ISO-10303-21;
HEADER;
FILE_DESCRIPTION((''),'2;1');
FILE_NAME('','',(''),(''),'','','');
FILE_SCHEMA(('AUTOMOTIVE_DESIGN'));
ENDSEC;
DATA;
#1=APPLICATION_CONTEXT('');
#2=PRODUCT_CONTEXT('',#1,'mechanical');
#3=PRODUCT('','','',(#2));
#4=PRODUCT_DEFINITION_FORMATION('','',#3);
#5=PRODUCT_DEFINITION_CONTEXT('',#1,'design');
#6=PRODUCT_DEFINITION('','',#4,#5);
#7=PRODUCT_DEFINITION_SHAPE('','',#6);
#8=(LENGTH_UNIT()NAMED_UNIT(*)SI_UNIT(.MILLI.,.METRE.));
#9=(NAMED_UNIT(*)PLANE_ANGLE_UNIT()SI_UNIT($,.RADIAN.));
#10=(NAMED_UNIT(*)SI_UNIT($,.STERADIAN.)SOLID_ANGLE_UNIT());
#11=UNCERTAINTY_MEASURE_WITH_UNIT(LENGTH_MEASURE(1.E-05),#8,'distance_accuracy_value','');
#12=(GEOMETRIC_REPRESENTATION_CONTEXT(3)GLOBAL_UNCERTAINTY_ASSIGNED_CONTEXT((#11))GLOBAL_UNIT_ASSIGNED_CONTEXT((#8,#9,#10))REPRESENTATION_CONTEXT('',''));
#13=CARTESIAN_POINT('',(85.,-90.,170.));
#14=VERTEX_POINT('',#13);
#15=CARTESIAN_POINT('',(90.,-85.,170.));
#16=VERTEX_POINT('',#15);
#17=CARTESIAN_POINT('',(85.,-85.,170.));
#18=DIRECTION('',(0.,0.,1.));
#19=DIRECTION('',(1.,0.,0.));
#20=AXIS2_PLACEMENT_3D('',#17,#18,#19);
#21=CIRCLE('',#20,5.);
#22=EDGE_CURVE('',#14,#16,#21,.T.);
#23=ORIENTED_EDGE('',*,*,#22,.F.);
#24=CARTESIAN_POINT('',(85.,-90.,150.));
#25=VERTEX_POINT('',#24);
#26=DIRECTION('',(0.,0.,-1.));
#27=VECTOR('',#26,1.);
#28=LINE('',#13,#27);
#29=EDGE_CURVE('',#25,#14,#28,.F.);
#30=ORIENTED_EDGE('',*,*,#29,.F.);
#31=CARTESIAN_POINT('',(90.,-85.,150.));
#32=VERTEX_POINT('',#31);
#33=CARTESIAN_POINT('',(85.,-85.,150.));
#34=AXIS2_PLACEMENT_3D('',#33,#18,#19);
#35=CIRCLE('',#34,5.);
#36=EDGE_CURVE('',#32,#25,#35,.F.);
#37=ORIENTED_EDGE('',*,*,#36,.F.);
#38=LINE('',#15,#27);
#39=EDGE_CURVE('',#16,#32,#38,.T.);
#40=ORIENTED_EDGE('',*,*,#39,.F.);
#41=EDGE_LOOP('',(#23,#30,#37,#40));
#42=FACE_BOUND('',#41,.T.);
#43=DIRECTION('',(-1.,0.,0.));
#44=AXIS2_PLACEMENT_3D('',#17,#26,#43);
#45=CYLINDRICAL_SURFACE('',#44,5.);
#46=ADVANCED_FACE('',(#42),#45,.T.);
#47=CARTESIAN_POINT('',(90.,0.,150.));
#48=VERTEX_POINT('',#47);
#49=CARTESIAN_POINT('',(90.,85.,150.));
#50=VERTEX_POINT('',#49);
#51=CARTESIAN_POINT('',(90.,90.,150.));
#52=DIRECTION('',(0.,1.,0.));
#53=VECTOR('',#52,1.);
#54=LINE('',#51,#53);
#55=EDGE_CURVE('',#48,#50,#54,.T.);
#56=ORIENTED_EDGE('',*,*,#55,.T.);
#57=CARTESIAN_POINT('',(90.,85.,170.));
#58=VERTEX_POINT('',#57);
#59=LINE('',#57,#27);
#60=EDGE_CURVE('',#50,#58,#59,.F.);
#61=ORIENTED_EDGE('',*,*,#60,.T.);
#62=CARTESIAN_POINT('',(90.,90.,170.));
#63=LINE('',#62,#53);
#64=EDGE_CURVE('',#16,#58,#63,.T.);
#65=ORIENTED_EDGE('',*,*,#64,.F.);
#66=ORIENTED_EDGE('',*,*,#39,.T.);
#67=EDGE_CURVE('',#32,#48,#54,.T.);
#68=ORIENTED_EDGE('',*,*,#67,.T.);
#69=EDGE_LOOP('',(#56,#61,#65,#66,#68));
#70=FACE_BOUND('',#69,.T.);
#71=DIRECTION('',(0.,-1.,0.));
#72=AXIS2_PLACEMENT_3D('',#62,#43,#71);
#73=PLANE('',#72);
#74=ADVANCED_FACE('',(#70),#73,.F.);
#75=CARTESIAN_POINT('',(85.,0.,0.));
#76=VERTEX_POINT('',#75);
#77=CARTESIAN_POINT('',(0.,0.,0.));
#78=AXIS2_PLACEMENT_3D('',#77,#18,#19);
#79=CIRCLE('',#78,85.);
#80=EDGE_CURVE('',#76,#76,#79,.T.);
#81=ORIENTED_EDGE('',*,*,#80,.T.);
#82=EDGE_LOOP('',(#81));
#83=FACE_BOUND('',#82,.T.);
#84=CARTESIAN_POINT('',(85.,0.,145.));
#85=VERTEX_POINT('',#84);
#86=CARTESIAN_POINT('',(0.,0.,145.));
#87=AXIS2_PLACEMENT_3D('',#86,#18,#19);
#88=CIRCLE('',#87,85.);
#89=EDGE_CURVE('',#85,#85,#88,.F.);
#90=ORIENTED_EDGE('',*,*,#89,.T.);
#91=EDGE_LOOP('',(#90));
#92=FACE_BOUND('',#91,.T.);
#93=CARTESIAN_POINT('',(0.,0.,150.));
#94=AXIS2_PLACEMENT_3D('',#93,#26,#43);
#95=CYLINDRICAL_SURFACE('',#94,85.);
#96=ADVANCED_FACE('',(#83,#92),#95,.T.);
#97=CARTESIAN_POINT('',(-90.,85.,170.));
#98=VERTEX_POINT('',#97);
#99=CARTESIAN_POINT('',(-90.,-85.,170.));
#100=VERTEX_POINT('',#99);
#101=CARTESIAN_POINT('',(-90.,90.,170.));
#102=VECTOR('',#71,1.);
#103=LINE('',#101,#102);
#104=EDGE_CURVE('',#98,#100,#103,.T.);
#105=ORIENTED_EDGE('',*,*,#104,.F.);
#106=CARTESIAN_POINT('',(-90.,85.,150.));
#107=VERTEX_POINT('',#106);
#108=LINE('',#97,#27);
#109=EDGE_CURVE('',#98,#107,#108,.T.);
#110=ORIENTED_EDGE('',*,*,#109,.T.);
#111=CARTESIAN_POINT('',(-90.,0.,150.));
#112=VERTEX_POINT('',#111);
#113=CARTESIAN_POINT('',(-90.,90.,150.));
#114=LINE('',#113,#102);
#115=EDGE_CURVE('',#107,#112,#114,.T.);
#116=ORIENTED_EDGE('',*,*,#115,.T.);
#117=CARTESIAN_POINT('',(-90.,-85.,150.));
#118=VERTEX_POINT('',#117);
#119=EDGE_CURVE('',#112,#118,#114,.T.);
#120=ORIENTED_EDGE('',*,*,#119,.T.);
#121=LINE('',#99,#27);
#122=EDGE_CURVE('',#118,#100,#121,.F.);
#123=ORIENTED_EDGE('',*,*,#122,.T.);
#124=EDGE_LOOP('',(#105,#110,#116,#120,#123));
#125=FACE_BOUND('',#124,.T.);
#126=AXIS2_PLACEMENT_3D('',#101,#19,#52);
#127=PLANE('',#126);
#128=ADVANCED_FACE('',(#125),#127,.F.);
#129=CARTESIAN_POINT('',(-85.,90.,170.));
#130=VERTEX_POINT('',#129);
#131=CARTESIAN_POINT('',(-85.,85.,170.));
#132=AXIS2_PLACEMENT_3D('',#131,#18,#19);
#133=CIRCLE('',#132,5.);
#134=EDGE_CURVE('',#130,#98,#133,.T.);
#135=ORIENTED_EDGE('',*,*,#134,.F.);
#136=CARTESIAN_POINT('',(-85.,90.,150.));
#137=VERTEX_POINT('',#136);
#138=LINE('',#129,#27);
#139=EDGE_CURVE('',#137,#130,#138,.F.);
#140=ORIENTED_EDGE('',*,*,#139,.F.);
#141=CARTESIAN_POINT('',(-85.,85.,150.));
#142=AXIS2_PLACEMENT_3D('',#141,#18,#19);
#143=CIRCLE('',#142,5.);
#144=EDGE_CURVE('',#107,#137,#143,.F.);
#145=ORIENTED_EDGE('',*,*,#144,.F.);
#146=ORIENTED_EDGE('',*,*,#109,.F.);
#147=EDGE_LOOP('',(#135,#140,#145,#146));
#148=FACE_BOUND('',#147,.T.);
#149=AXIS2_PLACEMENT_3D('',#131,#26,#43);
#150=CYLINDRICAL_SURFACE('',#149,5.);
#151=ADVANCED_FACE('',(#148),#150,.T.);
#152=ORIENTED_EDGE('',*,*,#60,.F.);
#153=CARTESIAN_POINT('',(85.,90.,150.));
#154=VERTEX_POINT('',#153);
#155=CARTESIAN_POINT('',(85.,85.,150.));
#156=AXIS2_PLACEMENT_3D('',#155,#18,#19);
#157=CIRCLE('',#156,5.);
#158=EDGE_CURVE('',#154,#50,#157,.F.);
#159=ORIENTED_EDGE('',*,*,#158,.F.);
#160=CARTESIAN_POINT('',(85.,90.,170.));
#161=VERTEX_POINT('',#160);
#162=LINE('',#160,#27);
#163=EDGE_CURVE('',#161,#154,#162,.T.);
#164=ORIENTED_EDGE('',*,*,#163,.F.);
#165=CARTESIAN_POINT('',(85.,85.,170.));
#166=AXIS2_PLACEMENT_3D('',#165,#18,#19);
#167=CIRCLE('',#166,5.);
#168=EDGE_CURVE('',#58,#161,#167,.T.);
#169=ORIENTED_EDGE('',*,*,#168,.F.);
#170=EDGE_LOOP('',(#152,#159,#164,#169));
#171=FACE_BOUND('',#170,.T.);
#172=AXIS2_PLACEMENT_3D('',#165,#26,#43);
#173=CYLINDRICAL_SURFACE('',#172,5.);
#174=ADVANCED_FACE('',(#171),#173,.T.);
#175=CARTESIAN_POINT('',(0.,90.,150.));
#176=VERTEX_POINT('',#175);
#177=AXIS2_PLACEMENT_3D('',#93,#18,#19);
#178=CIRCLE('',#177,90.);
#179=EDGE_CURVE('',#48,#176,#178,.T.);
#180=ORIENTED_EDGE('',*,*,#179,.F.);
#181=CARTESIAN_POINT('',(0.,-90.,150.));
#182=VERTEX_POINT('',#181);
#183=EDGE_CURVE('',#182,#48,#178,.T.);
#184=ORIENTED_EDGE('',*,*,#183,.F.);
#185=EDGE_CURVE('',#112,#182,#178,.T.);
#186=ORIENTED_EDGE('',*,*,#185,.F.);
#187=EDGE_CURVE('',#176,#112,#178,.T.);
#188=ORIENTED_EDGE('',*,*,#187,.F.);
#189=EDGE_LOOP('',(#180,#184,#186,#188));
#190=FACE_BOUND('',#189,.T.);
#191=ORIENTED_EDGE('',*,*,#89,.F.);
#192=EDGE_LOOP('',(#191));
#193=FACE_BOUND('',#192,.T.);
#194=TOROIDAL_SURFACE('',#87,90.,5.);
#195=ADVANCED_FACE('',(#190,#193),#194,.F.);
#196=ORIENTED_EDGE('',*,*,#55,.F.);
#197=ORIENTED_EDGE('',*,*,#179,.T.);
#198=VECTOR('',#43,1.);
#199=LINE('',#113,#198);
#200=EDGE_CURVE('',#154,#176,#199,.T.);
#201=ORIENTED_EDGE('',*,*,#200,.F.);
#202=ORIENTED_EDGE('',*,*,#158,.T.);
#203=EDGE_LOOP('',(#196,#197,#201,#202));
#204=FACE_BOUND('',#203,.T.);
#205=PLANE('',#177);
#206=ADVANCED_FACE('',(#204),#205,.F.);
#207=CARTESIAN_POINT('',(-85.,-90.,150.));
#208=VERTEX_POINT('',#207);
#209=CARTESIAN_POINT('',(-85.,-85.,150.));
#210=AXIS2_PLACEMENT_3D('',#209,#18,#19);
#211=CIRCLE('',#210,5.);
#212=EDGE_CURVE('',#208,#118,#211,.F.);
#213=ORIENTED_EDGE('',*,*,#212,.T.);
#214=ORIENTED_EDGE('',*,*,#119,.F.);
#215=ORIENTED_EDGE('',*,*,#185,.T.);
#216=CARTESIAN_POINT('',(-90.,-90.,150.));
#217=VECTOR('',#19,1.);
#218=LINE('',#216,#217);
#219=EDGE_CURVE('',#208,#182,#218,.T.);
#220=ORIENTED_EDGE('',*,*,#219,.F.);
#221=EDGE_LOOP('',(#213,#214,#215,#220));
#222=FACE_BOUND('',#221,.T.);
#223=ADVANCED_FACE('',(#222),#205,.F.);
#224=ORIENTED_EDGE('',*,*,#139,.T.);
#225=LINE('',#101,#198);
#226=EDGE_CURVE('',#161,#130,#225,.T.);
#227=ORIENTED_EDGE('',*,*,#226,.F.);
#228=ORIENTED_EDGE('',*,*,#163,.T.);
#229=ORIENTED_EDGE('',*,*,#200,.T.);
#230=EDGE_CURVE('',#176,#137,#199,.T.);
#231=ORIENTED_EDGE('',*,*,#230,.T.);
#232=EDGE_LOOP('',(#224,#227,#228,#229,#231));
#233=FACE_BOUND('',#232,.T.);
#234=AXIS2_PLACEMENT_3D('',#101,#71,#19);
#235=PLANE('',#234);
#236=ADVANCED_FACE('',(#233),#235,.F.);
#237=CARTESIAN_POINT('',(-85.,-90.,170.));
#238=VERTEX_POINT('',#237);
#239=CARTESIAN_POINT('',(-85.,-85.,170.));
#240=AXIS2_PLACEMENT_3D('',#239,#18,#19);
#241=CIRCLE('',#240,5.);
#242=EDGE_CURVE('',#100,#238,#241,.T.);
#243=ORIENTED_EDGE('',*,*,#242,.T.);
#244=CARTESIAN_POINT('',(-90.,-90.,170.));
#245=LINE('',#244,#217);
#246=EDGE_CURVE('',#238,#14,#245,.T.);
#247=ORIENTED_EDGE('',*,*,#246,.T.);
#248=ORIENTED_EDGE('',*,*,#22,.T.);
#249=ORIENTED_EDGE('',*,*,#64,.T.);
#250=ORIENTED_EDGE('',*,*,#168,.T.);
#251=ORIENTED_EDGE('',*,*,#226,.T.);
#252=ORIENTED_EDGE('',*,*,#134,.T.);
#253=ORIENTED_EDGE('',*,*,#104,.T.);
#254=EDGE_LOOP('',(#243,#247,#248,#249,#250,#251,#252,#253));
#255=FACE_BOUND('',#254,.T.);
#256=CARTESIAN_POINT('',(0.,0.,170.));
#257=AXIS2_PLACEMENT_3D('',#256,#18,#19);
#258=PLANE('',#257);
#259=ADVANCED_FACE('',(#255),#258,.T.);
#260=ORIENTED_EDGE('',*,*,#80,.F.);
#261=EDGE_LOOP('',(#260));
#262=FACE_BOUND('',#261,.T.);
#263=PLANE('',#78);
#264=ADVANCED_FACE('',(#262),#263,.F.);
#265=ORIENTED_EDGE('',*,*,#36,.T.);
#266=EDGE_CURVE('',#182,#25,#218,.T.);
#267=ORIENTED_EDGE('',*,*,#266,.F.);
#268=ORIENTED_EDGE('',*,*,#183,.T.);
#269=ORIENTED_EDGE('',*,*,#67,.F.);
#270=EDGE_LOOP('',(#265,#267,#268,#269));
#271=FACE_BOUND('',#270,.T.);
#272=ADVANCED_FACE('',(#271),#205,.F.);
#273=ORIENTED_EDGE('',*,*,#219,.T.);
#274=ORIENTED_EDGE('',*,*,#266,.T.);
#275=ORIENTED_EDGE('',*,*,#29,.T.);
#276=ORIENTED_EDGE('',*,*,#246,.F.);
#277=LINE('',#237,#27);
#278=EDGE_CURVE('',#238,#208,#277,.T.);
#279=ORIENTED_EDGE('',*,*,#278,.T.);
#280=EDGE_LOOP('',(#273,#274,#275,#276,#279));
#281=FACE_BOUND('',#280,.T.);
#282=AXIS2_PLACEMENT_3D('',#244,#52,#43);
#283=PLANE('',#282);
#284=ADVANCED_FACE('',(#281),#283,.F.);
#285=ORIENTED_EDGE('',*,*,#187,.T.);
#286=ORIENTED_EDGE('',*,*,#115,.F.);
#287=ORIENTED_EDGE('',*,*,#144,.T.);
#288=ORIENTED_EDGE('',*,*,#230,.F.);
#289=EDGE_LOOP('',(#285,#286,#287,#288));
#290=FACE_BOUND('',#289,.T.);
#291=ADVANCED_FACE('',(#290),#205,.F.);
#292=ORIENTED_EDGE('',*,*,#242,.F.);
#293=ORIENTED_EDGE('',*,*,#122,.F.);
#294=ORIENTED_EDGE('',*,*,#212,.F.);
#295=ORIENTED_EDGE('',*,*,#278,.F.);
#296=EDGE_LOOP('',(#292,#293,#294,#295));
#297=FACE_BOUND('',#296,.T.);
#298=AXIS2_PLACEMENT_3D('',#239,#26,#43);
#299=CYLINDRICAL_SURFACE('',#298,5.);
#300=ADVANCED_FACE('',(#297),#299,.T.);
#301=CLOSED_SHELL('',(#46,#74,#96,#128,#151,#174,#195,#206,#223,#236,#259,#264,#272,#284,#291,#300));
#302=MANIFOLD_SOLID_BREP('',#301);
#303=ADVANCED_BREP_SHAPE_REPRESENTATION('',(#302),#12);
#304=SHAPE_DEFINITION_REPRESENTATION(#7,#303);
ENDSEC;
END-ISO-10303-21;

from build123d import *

# Parameters (mm, degrees)
ESQUISSE1_R        = 85
BOSS_EXTRU_1_DEPTH = 150
ESQUISSE2_W        = 180
ESQUISSE2_H        = 180
BOSS_EXTRU_2_DEPTH = 20
CONG_1_R           = 5
CONG_2_R           = 5
CONG_3_R           = 5
CONG_4_R           = 5
CONG_5_R           = 5


with BuildPart() as part:
    # Esquisse1 → Boss.-Extru.1 (new body)
    with BuildSketch(Plane.XY):
        Circle(ESQUISSE1_R)
    extrude(amount=BOSS_EXTRU_1_DEPTH)

    # Esquisse2 → Boss.-Extru.2 (add)
    with BuildSketch(Plane.XY.offset(150)):
        Rectangle(ESQUISSE2_W, ESQUISSE2_H)
    extrude(amount=BOSS_EXTRU_2_DEPTH)

    # Congé1
    cong_1_edges = [part.edges().sort_by_distance(p)[0] for p in [
        (-85, 0, 150),
    ]]
    fillet(cong_1_edges, radius=CONG_1_R - 0.0001)  # a hair under: the kernel refuses the full size

    # Congé2
    cong_2_edges = [part.edges().sort_by_distance(p)[0] for p in [
        (-90, 90, 160),
    ]]
    fillet(cong_2_edges, radius=CONG_2_R)

    # Congé3
    cong_3_edges = [part.edges().sort_by_distance(p)[0] for p in [
        (-90, -90, 160),
    ]]
    fillet(cong_3_edges, radius=CONG_3_R)

    # Congé4
    cong_4_edges = [part.edges().sort_by_distance(p)[0] for p in [
        (90, 90, 160),
    ]]
    fillet(cong_4_edges, radius=CONG_4_R)

    # Congé5
    cong_5_edges = [part.edges().sort_by_distance(p)[0] for p in [
        (90, -90, 160),
    ]]
    fillet(cong_5_edges, radius=CONG_5_R)


solid = part.part
